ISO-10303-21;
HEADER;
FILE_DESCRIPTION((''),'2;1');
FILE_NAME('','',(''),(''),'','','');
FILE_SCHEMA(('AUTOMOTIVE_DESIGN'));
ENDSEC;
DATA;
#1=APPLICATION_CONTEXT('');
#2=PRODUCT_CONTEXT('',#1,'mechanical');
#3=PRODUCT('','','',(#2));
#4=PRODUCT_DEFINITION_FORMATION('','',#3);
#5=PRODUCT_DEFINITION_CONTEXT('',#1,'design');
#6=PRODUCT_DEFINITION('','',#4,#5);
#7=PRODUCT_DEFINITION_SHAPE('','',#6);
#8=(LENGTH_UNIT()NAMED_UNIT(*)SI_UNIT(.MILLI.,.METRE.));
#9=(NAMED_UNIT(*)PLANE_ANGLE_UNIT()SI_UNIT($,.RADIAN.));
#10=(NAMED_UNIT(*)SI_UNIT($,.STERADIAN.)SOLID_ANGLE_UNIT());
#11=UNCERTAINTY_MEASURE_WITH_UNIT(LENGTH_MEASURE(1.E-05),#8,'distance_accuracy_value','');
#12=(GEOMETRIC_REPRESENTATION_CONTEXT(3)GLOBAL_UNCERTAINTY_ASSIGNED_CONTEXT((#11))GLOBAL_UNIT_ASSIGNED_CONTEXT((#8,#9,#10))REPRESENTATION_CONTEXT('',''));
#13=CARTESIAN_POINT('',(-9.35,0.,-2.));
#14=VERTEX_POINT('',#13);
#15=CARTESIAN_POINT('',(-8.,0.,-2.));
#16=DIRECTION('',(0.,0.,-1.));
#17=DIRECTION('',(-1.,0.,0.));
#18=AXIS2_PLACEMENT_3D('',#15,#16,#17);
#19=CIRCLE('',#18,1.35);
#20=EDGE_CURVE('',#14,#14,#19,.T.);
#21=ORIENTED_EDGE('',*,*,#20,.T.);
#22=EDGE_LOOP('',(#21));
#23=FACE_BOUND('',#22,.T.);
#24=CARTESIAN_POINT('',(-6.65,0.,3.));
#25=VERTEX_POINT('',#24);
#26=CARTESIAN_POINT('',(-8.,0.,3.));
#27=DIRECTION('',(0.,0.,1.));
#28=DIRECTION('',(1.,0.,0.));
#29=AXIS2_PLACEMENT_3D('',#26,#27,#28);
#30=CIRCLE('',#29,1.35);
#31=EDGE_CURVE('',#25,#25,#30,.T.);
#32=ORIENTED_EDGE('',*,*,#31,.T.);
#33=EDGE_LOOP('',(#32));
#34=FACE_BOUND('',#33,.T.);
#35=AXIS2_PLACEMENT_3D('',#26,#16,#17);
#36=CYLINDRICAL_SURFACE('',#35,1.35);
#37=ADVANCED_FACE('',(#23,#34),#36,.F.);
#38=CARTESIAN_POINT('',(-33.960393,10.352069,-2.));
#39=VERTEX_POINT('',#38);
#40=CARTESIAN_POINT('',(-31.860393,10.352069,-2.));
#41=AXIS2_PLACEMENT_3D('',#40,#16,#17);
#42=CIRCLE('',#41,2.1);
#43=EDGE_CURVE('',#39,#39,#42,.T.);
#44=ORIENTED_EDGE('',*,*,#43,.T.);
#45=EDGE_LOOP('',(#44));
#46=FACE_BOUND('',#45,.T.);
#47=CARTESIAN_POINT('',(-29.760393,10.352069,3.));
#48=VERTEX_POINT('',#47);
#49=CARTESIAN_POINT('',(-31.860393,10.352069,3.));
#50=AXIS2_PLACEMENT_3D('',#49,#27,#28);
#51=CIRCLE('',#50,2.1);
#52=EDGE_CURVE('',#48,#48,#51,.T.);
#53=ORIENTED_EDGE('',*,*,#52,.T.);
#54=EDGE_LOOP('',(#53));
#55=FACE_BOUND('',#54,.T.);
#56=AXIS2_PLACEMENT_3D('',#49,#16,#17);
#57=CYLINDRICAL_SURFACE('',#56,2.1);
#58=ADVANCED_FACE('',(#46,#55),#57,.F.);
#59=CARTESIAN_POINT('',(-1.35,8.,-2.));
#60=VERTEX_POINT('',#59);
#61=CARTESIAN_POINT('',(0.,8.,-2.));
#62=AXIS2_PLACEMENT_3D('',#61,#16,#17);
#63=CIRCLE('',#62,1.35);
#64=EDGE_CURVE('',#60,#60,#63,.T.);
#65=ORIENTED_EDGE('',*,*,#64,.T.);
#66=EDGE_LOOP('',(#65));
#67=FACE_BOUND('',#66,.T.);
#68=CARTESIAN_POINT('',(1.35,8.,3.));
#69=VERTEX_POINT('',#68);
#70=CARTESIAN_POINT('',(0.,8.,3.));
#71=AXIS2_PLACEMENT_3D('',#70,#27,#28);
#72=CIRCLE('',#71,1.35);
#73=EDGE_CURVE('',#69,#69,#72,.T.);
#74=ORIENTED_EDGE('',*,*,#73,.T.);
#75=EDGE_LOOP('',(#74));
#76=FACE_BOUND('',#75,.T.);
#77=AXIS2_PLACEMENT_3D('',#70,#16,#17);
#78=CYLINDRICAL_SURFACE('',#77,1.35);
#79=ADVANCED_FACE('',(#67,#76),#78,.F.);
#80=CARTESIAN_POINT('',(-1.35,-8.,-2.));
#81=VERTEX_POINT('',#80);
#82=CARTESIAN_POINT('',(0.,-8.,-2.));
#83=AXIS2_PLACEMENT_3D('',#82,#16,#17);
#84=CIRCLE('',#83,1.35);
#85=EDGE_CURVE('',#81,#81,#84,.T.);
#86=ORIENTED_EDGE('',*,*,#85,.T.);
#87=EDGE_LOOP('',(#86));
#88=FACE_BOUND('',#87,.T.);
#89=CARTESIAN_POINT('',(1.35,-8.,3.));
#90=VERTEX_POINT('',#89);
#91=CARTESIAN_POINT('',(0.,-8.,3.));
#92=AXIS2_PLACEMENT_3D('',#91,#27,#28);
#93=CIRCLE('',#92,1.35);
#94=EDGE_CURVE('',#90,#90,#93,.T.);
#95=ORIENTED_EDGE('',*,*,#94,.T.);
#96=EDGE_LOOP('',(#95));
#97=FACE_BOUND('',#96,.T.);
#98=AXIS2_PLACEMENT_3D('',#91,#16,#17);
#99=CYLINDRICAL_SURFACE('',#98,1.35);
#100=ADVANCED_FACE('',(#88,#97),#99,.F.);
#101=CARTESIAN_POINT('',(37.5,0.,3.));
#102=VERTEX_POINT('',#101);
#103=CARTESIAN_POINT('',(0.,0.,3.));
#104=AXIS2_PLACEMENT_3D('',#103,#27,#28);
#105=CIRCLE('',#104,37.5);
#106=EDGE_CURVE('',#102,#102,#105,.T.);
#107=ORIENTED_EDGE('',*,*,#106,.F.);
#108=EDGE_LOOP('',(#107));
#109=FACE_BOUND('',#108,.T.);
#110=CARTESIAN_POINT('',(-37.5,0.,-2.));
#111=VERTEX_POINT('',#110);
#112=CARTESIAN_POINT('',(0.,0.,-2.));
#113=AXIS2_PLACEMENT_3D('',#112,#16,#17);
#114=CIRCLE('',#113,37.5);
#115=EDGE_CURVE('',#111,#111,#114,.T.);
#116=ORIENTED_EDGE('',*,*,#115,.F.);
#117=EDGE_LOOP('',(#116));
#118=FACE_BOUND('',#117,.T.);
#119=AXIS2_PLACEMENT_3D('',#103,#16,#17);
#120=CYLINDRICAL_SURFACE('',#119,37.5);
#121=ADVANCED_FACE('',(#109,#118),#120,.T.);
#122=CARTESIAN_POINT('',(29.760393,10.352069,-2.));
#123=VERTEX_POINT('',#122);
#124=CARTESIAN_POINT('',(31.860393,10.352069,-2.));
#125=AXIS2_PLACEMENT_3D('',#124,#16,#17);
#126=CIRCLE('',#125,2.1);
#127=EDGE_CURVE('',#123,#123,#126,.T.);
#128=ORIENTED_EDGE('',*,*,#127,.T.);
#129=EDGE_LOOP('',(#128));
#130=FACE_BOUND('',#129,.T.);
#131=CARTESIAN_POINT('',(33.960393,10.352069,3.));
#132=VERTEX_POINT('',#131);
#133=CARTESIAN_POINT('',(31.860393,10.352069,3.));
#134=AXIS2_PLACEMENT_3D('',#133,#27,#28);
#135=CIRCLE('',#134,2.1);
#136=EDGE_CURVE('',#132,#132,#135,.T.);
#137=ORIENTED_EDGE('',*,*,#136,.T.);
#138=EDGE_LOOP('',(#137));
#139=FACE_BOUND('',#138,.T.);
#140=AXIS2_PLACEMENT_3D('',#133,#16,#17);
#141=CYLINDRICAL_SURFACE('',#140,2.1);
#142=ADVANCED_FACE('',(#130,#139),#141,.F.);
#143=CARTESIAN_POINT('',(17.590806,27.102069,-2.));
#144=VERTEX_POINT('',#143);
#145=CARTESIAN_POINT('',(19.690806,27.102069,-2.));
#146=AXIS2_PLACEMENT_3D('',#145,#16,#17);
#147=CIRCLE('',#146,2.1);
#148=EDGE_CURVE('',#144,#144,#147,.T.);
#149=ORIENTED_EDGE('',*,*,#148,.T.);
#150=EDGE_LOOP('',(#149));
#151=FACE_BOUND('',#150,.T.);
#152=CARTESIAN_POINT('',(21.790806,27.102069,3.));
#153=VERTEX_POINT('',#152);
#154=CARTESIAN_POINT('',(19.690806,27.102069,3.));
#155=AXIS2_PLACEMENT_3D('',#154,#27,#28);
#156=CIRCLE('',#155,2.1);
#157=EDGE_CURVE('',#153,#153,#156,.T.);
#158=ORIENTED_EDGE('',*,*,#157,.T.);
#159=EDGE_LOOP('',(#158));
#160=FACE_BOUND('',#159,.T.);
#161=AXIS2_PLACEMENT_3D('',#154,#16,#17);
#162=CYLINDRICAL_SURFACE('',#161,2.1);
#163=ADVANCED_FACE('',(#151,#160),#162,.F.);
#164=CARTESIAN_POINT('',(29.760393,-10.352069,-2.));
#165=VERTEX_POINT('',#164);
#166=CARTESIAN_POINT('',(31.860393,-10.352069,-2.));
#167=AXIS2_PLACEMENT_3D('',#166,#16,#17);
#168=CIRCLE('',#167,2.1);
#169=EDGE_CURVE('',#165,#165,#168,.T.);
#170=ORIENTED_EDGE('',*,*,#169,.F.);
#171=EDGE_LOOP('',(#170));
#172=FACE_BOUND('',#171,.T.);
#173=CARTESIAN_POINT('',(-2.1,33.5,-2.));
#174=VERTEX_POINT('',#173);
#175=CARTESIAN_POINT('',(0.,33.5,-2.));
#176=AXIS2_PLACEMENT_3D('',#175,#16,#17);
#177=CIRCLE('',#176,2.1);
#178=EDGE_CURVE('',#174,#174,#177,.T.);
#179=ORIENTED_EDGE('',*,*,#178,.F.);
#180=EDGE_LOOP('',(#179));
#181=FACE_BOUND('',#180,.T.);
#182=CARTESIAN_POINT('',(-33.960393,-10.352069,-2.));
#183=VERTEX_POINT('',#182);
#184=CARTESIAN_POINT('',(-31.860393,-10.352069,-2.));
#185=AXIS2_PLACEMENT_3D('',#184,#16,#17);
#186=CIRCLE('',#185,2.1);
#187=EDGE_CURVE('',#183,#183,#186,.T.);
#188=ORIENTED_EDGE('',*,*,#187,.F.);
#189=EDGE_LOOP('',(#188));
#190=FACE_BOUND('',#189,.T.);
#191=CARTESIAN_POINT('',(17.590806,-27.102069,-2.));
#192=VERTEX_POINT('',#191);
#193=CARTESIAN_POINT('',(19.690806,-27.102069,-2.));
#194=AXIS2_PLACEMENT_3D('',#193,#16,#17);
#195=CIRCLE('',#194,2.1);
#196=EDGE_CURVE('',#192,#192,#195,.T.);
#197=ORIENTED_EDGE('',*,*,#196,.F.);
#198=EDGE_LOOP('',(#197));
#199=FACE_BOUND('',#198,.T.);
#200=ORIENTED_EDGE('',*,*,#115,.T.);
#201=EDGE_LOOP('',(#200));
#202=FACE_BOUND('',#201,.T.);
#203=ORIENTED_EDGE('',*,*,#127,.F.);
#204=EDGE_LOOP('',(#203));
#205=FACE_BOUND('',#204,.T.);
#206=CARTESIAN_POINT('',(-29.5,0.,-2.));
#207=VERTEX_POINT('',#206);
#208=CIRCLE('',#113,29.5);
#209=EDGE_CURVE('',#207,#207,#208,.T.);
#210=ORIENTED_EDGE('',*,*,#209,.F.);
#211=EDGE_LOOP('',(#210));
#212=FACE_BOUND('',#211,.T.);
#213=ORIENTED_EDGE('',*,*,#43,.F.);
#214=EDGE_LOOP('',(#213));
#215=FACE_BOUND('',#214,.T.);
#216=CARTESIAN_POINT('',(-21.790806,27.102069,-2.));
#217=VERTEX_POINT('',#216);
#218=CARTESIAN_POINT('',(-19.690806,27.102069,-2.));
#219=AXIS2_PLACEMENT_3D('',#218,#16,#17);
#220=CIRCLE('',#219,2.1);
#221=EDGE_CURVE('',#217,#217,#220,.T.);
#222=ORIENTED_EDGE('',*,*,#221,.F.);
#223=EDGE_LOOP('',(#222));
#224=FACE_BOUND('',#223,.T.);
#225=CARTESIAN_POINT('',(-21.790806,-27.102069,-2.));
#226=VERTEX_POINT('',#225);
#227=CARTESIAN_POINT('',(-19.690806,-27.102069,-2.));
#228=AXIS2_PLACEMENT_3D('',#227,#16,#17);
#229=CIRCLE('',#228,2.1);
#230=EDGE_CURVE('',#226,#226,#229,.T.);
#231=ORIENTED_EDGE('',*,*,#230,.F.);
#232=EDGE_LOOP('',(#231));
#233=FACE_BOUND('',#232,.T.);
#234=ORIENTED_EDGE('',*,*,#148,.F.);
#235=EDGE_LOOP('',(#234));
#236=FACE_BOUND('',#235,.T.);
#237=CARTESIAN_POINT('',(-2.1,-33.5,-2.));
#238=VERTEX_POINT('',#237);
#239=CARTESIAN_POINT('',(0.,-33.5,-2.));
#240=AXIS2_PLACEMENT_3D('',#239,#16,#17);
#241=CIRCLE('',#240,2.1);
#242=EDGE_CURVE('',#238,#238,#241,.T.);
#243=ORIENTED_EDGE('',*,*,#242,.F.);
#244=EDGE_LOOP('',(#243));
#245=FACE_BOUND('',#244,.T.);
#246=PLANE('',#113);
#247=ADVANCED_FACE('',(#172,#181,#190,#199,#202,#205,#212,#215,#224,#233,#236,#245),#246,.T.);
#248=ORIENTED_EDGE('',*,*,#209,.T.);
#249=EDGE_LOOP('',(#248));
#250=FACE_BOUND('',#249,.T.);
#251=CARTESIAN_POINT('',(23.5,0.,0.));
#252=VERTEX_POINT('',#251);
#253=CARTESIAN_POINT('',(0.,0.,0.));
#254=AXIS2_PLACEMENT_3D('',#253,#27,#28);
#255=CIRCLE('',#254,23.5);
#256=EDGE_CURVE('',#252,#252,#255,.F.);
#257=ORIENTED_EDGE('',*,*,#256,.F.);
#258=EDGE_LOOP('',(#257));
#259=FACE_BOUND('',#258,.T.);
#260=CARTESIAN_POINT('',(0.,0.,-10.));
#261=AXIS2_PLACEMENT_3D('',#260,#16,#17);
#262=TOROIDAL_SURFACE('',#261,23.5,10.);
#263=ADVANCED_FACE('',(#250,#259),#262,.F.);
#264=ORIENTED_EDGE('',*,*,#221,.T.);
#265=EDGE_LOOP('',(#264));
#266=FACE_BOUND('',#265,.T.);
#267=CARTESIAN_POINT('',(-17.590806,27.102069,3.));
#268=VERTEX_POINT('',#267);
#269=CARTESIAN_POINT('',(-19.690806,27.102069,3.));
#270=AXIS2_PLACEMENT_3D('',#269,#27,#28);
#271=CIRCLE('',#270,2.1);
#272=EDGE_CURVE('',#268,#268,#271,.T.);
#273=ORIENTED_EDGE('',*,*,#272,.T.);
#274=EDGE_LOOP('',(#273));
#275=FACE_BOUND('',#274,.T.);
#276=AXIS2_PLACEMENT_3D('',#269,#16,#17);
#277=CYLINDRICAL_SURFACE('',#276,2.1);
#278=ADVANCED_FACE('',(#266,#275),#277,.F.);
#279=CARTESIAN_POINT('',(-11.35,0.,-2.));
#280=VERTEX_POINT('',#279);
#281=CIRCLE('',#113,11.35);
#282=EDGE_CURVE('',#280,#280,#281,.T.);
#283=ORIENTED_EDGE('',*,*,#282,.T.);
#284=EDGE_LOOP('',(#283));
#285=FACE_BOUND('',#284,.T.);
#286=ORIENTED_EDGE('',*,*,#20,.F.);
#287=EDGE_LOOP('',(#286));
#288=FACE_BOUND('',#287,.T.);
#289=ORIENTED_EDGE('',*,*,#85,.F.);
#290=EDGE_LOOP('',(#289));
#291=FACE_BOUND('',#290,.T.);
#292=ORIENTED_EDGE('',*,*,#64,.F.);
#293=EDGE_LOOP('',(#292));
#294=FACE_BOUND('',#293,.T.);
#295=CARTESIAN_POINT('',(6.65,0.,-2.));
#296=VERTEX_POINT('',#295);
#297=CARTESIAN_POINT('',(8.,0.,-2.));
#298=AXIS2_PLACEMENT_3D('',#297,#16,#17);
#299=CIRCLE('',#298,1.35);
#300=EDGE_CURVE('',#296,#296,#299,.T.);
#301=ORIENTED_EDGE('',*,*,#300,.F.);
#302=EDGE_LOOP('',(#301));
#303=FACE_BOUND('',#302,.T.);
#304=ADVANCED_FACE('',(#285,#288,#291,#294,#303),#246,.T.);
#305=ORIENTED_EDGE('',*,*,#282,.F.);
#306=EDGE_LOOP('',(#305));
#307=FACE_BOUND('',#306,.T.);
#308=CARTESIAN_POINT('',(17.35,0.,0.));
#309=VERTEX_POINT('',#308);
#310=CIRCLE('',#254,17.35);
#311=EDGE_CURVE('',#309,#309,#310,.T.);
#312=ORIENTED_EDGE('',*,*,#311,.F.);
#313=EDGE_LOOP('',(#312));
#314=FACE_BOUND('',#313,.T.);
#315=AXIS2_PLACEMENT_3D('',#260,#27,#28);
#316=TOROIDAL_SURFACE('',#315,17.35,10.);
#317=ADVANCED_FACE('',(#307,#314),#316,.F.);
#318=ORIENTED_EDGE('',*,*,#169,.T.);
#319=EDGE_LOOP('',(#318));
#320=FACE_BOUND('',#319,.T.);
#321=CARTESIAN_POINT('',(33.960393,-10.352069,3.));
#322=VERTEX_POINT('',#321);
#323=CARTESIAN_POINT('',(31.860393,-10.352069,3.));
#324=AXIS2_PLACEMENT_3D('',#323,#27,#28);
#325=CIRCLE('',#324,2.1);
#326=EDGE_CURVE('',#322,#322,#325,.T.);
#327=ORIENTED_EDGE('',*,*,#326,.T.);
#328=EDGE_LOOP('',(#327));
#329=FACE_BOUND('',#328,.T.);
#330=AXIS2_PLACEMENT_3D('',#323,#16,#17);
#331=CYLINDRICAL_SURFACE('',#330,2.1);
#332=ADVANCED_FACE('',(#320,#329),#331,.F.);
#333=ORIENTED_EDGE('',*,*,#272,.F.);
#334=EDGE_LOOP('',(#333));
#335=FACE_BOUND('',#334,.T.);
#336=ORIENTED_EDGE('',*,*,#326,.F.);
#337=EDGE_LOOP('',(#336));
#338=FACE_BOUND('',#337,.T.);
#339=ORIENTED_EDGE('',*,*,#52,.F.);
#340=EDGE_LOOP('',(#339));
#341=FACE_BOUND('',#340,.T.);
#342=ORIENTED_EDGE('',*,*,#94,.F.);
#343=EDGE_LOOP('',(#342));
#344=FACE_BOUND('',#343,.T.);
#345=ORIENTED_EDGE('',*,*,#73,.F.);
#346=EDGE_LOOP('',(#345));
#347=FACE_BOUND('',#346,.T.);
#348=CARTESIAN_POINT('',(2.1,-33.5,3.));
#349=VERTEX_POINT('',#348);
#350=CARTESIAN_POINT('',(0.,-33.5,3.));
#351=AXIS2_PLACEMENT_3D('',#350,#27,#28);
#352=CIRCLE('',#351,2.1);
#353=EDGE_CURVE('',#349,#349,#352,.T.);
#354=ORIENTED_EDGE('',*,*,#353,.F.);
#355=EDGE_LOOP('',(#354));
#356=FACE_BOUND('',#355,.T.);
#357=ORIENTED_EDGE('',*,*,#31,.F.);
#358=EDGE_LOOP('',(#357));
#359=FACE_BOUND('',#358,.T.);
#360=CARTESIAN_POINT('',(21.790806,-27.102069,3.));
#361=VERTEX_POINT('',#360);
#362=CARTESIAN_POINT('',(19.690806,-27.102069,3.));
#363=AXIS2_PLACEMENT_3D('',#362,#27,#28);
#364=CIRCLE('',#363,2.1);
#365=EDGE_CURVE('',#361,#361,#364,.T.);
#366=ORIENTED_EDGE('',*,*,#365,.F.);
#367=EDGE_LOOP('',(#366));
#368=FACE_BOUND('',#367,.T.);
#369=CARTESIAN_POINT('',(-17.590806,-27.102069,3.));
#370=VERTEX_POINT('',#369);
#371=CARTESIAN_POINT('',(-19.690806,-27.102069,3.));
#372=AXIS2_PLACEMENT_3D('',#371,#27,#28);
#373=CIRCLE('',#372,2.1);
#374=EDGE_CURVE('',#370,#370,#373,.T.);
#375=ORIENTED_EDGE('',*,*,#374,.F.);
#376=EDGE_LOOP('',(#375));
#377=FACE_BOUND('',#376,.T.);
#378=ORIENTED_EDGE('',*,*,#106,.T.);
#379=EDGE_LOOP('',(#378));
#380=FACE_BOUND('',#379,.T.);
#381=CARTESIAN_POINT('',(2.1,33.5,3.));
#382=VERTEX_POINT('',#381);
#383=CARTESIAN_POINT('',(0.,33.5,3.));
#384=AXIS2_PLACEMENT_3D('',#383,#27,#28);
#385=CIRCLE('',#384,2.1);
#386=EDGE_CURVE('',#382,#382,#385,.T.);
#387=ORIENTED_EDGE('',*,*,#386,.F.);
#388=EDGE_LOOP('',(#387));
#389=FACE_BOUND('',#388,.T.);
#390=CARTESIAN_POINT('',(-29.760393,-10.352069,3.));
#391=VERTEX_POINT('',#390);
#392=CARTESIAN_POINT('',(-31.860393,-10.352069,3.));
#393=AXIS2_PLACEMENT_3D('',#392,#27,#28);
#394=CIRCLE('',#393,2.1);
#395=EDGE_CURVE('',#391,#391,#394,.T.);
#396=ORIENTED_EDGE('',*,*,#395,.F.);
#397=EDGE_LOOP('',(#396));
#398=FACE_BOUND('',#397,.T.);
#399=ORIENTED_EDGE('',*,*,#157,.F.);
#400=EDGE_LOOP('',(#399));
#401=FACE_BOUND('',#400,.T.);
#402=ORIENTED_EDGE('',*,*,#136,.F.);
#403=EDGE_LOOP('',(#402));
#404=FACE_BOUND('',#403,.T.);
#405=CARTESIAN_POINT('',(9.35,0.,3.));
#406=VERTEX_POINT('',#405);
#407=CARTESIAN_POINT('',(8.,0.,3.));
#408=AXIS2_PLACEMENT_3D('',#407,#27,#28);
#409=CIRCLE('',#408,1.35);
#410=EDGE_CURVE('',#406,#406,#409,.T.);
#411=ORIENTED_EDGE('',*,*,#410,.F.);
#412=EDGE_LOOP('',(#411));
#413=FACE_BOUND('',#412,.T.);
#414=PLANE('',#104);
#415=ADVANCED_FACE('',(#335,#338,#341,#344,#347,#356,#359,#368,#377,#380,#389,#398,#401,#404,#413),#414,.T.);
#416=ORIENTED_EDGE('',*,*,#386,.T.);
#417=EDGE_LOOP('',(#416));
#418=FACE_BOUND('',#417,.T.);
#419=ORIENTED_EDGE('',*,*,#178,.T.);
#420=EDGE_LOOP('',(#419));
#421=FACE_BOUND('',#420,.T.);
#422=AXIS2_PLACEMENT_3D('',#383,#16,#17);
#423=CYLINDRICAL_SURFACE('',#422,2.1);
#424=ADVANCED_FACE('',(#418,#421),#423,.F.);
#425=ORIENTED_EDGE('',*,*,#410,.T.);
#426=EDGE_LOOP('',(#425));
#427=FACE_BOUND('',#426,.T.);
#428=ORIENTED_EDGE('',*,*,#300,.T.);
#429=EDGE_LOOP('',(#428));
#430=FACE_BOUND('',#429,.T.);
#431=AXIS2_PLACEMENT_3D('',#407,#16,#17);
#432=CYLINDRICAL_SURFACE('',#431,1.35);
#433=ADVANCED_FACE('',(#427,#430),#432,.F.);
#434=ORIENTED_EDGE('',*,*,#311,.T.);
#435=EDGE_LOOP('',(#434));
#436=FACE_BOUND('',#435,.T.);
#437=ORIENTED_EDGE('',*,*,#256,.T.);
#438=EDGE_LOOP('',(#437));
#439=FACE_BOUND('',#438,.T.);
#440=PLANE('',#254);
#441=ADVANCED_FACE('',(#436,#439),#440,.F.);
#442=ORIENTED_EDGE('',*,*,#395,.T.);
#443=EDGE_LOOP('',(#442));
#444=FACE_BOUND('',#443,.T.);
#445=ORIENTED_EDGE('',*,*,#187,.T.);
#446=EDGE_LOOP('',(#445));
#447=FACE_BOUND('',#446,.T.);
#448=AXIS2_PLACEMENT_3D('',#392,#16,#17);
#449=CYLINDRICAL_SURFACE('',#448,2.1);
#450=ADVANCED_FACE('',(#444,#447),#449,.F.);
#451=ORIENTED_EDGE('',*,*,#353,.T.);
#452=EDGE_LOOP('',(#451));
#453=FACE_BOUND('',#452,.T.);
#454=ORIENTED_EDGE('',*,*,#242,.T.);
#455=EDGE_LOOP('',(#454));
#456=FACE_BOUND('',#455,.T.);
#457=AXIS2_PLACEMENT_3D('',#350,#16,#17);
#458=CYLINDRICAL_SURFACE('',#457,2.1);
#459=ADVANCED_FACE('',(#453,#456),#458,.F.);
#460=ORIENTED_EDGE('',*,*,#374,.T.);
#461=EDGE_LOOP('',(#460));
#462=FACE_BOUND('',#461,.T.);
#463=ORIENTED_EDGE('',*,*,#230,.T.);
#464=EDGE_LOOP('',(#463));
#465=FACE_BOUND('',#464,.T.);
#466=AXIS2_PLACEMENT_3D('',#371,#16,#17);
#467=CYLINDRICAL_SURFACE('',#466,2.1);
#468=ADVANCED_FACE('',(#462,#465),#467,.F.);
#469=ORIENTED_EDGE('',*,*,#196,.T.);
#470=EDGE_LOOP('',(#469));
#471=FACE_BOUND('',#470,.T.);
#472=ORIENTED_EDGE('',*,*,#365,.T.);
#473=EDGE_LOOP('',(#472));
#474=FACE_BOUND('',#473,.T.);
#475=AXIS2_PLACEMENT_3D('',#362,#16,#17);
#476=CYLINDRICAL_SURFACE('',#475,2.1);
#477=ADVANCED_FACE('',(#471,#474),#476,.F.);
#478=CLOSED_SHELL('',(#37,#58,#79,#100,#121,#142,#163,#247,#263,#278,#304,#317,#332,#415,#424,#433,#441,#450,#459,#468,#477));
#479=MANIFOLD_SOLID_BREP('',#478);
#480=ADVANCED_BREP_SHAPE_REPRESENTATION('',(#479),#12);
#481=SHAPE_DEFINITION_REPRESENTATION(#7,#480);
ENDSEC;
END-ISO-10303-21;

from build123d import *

# Parameters (mm, degrees)
SKETCH1_R           = 37.5
SKETCH1_R_2         = 1.35
SKETCH1_R_3         = 2.1
BOSS_EXTRUDE1_DEPTH = 3
BOSS_EXTRUDE2_START = 2
SKETCH2_R           = 37.5
SKETCH2_R_2         = 29.5
SKETCH2_R_3         = 2.1
BOSS_EXTRUDE2_DEPTH = 2
BOSS_EXTRUDE3_START = 2
SKETCH3_R           = 11.35
SKETCH3_R_2         = 1.35
BOSS_EXTRUDE3_DEPTH = 2
FILLET2_R           = 10
FILLET3_R           = 10


with BuildPart() as part:
    # Sketch1 → Boss-Extrude1 (new body)
    with BuildSketch(Plane.XY):
        Circle(SKETCH1_R)
        with Locations((0, 8)):
            Circle(SKETCH1_R_2, mode=Mode.SUBTRACT)
        with Locations((0, -8)):
            Circle(SKETCH1_R_2, mode=Mode.SUBTRACT)
        with Locations((8, 0)):
            Circle(SKETCH1_R_2, mode=Mode.SUBTRACT)
        with Locations((-8, 0)):
            Circle(SKETCH1_R_2, mode=Mode.SUBTRACT)
        with Locations((0, 33.5)):
            Circle(SKETCH1_R_3, mode=Mode.SUBTRACT)
        with Locations((19.690805952, 27.102069312)):
            Circle(SKETCH1_R_3, mode=Mode.SUBTRACT)
        with Locations((31.860393296, 10.352069312)):
            Circle(SKETCH1_R_3, mode=Mode.SUBTRACT)
        with Locations((31.860393296, -10.352069312)):
            Circle(SKETCH1_R_3, mode=Mode.SUBTRACT)
        with Locations((19.690805952, -27.102069312)):
            Circle(SKETCH1_R_3, mode=Mode.SUBTRACT)
        with Locations((0, -33.5)):
            Circle(SKETCH1_R_3, mode=Mode.SUBTRACT)
        with Locations((-19.690805952, -27.102069312)):
            Circle(SKETCH1_R_3, mode=Mode.SUBTRACT)
        with Locations((-31.860393296, -10.352069312)):
            Circle(SKETCH1_R_3, mode=Mode.SUBTRACT)
        with Locations((-31.860393296, 10.352069312)):
            Circle(SKETCH1_R_3, mode=Mode.SUBTRACT)
        with Locations((-19.690805952, 27.102069312)):
            Circle(SKETCH1_R_3, mode=Mode.SUBTRACT)
    extrude(amount=BOSS_EXTRUDE1_DEPTH)

    # Sketch2 → Boss-Extrude2 (add)
    with BuildSketch(Plane(origin=(0, 0, 0), x_dir=(-1, 0, 0), z_dir=(0, 0, -1)).offset(BOSS_EXTRUDE2_START)):
        Circle(SKETCH2_R)
        Circle(SKETCH2_R_2, mode=Mode.SUBTRACT)
        with Locations((-19.690805952, 27.102069312)):
            Circle(SKETCH2_R_3, mode=Mode.SUBTRACT)
        with Locations((-31.860393296, 10.352069312)):
            Circle(SKETCH2_R_3, mode=Mode.SUBTRACT)
        with Locations((-31.860393296, -10.352069312)):
            Circle(SKETCH2_R_3, mode=Mode.SUBTRACT)
        with Locations((-19.690805952, -27.102069312)):
            Circle(SKETCH2_R_3, mode=Mode.SUBTRACT)
        with Locations((0, -33.5)):
            Circle(SKETCH2_R_3, mode=Mode.SUBTRACT)
        with Locations((0, 33.5)):
            Circle(SKETCH2_R_3, mode=Mode.SUBTRACT)
        with Locations((19.690805952, -27.102069312)):
            Circle(SKETCH2_R_3, mode=Mode.SUBTRACT)
        with Locations((31.860393296, -10.352069312)):
            Circle(SKETCH2_R_3, mode=Mode.SUBTRACT)
        with Locations((31.860393296, 10.352069312)):
            Circle(SKETCH2_R_3, mode=Mode.SUBTRACT)
        with Locations((19.690805952, 27.102069312)):
            Circle(SKETCH2_R_3, mode=Mode.SUBTRACT)
    extrude(amount=-BOSS_EXTRUDE2_DEPTH)

    # Sketch3 → Boss-Extrude3 (add)
    with BuildSketch(Plane(origin=(0, 0, 0), x_dir=(-1, 0, 0), z_dir=(0, 0, -1)).offset(BOSS_EXTRUDE3_START)):
        with Locations(Location((0, 0, 0), (0, 0, 180))):
            Circle(SKETCH3_R)
        with Locations((0, -8)):
            Circle(SKETCH3_R_2, mode=Mode.SUBTRACT)
        with Locations((8, 0)):
            Circle(SKETCH3_R_2, mode=Mode.SUBTRACT)
        with Locations((0, 8)):
            Circle(SKETCH3_R_2, mode=Mode.SUBTRACT)
        with Locations((-8, 0)):
            Circle(SKETCH3_R_2, mode=Mode.SUBTRACT)
    extrude(amount=-BOSS_EXTRUDE3_DEPTH)

    # Fillet2
    # the kernel refuses this fillet: 10 mm, written as the material it adds along each edge
    with BuildSketch(Plane(origin=(0, 0, 0), x_dir=(1, 0, 0), z_dir=(0, 1, 0))) as fillet2_piece_1:
        with BuildLine():
            CenterArc((17.35, 10), FILLET2_R, 233.130102354, 36.869897646)
            Line((11.35, 2), (11.23, 1.84))
            ThreePointArc((11.23, 1.84), (11.15, 1), (11.15, 0))
            Line((11.15, 0), (11.35, -0.2))
            Line((11.35, -0.2), (17.35, -0.2))
            Line((17.35, -0.2), (17.35, 0))
        make_face()
    revolve(axis=Axis((0, 0, 0), (0, 0, -1)))

    # Fillet3
    # the kernel refuses this fillet: 10 mm, written as the material it adds along each edge
    with BuildSketch(Plane(origin=(0, 0, 0), x_dir=(-1, 0, 0), z_dir=(0, -1, 0))) as fillet3_piece_1:
        with BuildLine():
            CenterArc((23.5, 10), FILLET3_R, 270, 36.869897646)
            Line((29.5, 2), (29.62, 1.84))
            ThreePointArc((29.62, 1.84), (29.7, 1), (29.7, 0))
            Line((29.7, 0), (29.5, -0.2))
            Line((29.5, -0.2), (23.5, -0.2))
            Line((23.5, -0.2), (23.5, 0))
        make_face()
    revolve(axis=Axis((0, 0, 0), (0, 0, -1)))


solid = part.part
